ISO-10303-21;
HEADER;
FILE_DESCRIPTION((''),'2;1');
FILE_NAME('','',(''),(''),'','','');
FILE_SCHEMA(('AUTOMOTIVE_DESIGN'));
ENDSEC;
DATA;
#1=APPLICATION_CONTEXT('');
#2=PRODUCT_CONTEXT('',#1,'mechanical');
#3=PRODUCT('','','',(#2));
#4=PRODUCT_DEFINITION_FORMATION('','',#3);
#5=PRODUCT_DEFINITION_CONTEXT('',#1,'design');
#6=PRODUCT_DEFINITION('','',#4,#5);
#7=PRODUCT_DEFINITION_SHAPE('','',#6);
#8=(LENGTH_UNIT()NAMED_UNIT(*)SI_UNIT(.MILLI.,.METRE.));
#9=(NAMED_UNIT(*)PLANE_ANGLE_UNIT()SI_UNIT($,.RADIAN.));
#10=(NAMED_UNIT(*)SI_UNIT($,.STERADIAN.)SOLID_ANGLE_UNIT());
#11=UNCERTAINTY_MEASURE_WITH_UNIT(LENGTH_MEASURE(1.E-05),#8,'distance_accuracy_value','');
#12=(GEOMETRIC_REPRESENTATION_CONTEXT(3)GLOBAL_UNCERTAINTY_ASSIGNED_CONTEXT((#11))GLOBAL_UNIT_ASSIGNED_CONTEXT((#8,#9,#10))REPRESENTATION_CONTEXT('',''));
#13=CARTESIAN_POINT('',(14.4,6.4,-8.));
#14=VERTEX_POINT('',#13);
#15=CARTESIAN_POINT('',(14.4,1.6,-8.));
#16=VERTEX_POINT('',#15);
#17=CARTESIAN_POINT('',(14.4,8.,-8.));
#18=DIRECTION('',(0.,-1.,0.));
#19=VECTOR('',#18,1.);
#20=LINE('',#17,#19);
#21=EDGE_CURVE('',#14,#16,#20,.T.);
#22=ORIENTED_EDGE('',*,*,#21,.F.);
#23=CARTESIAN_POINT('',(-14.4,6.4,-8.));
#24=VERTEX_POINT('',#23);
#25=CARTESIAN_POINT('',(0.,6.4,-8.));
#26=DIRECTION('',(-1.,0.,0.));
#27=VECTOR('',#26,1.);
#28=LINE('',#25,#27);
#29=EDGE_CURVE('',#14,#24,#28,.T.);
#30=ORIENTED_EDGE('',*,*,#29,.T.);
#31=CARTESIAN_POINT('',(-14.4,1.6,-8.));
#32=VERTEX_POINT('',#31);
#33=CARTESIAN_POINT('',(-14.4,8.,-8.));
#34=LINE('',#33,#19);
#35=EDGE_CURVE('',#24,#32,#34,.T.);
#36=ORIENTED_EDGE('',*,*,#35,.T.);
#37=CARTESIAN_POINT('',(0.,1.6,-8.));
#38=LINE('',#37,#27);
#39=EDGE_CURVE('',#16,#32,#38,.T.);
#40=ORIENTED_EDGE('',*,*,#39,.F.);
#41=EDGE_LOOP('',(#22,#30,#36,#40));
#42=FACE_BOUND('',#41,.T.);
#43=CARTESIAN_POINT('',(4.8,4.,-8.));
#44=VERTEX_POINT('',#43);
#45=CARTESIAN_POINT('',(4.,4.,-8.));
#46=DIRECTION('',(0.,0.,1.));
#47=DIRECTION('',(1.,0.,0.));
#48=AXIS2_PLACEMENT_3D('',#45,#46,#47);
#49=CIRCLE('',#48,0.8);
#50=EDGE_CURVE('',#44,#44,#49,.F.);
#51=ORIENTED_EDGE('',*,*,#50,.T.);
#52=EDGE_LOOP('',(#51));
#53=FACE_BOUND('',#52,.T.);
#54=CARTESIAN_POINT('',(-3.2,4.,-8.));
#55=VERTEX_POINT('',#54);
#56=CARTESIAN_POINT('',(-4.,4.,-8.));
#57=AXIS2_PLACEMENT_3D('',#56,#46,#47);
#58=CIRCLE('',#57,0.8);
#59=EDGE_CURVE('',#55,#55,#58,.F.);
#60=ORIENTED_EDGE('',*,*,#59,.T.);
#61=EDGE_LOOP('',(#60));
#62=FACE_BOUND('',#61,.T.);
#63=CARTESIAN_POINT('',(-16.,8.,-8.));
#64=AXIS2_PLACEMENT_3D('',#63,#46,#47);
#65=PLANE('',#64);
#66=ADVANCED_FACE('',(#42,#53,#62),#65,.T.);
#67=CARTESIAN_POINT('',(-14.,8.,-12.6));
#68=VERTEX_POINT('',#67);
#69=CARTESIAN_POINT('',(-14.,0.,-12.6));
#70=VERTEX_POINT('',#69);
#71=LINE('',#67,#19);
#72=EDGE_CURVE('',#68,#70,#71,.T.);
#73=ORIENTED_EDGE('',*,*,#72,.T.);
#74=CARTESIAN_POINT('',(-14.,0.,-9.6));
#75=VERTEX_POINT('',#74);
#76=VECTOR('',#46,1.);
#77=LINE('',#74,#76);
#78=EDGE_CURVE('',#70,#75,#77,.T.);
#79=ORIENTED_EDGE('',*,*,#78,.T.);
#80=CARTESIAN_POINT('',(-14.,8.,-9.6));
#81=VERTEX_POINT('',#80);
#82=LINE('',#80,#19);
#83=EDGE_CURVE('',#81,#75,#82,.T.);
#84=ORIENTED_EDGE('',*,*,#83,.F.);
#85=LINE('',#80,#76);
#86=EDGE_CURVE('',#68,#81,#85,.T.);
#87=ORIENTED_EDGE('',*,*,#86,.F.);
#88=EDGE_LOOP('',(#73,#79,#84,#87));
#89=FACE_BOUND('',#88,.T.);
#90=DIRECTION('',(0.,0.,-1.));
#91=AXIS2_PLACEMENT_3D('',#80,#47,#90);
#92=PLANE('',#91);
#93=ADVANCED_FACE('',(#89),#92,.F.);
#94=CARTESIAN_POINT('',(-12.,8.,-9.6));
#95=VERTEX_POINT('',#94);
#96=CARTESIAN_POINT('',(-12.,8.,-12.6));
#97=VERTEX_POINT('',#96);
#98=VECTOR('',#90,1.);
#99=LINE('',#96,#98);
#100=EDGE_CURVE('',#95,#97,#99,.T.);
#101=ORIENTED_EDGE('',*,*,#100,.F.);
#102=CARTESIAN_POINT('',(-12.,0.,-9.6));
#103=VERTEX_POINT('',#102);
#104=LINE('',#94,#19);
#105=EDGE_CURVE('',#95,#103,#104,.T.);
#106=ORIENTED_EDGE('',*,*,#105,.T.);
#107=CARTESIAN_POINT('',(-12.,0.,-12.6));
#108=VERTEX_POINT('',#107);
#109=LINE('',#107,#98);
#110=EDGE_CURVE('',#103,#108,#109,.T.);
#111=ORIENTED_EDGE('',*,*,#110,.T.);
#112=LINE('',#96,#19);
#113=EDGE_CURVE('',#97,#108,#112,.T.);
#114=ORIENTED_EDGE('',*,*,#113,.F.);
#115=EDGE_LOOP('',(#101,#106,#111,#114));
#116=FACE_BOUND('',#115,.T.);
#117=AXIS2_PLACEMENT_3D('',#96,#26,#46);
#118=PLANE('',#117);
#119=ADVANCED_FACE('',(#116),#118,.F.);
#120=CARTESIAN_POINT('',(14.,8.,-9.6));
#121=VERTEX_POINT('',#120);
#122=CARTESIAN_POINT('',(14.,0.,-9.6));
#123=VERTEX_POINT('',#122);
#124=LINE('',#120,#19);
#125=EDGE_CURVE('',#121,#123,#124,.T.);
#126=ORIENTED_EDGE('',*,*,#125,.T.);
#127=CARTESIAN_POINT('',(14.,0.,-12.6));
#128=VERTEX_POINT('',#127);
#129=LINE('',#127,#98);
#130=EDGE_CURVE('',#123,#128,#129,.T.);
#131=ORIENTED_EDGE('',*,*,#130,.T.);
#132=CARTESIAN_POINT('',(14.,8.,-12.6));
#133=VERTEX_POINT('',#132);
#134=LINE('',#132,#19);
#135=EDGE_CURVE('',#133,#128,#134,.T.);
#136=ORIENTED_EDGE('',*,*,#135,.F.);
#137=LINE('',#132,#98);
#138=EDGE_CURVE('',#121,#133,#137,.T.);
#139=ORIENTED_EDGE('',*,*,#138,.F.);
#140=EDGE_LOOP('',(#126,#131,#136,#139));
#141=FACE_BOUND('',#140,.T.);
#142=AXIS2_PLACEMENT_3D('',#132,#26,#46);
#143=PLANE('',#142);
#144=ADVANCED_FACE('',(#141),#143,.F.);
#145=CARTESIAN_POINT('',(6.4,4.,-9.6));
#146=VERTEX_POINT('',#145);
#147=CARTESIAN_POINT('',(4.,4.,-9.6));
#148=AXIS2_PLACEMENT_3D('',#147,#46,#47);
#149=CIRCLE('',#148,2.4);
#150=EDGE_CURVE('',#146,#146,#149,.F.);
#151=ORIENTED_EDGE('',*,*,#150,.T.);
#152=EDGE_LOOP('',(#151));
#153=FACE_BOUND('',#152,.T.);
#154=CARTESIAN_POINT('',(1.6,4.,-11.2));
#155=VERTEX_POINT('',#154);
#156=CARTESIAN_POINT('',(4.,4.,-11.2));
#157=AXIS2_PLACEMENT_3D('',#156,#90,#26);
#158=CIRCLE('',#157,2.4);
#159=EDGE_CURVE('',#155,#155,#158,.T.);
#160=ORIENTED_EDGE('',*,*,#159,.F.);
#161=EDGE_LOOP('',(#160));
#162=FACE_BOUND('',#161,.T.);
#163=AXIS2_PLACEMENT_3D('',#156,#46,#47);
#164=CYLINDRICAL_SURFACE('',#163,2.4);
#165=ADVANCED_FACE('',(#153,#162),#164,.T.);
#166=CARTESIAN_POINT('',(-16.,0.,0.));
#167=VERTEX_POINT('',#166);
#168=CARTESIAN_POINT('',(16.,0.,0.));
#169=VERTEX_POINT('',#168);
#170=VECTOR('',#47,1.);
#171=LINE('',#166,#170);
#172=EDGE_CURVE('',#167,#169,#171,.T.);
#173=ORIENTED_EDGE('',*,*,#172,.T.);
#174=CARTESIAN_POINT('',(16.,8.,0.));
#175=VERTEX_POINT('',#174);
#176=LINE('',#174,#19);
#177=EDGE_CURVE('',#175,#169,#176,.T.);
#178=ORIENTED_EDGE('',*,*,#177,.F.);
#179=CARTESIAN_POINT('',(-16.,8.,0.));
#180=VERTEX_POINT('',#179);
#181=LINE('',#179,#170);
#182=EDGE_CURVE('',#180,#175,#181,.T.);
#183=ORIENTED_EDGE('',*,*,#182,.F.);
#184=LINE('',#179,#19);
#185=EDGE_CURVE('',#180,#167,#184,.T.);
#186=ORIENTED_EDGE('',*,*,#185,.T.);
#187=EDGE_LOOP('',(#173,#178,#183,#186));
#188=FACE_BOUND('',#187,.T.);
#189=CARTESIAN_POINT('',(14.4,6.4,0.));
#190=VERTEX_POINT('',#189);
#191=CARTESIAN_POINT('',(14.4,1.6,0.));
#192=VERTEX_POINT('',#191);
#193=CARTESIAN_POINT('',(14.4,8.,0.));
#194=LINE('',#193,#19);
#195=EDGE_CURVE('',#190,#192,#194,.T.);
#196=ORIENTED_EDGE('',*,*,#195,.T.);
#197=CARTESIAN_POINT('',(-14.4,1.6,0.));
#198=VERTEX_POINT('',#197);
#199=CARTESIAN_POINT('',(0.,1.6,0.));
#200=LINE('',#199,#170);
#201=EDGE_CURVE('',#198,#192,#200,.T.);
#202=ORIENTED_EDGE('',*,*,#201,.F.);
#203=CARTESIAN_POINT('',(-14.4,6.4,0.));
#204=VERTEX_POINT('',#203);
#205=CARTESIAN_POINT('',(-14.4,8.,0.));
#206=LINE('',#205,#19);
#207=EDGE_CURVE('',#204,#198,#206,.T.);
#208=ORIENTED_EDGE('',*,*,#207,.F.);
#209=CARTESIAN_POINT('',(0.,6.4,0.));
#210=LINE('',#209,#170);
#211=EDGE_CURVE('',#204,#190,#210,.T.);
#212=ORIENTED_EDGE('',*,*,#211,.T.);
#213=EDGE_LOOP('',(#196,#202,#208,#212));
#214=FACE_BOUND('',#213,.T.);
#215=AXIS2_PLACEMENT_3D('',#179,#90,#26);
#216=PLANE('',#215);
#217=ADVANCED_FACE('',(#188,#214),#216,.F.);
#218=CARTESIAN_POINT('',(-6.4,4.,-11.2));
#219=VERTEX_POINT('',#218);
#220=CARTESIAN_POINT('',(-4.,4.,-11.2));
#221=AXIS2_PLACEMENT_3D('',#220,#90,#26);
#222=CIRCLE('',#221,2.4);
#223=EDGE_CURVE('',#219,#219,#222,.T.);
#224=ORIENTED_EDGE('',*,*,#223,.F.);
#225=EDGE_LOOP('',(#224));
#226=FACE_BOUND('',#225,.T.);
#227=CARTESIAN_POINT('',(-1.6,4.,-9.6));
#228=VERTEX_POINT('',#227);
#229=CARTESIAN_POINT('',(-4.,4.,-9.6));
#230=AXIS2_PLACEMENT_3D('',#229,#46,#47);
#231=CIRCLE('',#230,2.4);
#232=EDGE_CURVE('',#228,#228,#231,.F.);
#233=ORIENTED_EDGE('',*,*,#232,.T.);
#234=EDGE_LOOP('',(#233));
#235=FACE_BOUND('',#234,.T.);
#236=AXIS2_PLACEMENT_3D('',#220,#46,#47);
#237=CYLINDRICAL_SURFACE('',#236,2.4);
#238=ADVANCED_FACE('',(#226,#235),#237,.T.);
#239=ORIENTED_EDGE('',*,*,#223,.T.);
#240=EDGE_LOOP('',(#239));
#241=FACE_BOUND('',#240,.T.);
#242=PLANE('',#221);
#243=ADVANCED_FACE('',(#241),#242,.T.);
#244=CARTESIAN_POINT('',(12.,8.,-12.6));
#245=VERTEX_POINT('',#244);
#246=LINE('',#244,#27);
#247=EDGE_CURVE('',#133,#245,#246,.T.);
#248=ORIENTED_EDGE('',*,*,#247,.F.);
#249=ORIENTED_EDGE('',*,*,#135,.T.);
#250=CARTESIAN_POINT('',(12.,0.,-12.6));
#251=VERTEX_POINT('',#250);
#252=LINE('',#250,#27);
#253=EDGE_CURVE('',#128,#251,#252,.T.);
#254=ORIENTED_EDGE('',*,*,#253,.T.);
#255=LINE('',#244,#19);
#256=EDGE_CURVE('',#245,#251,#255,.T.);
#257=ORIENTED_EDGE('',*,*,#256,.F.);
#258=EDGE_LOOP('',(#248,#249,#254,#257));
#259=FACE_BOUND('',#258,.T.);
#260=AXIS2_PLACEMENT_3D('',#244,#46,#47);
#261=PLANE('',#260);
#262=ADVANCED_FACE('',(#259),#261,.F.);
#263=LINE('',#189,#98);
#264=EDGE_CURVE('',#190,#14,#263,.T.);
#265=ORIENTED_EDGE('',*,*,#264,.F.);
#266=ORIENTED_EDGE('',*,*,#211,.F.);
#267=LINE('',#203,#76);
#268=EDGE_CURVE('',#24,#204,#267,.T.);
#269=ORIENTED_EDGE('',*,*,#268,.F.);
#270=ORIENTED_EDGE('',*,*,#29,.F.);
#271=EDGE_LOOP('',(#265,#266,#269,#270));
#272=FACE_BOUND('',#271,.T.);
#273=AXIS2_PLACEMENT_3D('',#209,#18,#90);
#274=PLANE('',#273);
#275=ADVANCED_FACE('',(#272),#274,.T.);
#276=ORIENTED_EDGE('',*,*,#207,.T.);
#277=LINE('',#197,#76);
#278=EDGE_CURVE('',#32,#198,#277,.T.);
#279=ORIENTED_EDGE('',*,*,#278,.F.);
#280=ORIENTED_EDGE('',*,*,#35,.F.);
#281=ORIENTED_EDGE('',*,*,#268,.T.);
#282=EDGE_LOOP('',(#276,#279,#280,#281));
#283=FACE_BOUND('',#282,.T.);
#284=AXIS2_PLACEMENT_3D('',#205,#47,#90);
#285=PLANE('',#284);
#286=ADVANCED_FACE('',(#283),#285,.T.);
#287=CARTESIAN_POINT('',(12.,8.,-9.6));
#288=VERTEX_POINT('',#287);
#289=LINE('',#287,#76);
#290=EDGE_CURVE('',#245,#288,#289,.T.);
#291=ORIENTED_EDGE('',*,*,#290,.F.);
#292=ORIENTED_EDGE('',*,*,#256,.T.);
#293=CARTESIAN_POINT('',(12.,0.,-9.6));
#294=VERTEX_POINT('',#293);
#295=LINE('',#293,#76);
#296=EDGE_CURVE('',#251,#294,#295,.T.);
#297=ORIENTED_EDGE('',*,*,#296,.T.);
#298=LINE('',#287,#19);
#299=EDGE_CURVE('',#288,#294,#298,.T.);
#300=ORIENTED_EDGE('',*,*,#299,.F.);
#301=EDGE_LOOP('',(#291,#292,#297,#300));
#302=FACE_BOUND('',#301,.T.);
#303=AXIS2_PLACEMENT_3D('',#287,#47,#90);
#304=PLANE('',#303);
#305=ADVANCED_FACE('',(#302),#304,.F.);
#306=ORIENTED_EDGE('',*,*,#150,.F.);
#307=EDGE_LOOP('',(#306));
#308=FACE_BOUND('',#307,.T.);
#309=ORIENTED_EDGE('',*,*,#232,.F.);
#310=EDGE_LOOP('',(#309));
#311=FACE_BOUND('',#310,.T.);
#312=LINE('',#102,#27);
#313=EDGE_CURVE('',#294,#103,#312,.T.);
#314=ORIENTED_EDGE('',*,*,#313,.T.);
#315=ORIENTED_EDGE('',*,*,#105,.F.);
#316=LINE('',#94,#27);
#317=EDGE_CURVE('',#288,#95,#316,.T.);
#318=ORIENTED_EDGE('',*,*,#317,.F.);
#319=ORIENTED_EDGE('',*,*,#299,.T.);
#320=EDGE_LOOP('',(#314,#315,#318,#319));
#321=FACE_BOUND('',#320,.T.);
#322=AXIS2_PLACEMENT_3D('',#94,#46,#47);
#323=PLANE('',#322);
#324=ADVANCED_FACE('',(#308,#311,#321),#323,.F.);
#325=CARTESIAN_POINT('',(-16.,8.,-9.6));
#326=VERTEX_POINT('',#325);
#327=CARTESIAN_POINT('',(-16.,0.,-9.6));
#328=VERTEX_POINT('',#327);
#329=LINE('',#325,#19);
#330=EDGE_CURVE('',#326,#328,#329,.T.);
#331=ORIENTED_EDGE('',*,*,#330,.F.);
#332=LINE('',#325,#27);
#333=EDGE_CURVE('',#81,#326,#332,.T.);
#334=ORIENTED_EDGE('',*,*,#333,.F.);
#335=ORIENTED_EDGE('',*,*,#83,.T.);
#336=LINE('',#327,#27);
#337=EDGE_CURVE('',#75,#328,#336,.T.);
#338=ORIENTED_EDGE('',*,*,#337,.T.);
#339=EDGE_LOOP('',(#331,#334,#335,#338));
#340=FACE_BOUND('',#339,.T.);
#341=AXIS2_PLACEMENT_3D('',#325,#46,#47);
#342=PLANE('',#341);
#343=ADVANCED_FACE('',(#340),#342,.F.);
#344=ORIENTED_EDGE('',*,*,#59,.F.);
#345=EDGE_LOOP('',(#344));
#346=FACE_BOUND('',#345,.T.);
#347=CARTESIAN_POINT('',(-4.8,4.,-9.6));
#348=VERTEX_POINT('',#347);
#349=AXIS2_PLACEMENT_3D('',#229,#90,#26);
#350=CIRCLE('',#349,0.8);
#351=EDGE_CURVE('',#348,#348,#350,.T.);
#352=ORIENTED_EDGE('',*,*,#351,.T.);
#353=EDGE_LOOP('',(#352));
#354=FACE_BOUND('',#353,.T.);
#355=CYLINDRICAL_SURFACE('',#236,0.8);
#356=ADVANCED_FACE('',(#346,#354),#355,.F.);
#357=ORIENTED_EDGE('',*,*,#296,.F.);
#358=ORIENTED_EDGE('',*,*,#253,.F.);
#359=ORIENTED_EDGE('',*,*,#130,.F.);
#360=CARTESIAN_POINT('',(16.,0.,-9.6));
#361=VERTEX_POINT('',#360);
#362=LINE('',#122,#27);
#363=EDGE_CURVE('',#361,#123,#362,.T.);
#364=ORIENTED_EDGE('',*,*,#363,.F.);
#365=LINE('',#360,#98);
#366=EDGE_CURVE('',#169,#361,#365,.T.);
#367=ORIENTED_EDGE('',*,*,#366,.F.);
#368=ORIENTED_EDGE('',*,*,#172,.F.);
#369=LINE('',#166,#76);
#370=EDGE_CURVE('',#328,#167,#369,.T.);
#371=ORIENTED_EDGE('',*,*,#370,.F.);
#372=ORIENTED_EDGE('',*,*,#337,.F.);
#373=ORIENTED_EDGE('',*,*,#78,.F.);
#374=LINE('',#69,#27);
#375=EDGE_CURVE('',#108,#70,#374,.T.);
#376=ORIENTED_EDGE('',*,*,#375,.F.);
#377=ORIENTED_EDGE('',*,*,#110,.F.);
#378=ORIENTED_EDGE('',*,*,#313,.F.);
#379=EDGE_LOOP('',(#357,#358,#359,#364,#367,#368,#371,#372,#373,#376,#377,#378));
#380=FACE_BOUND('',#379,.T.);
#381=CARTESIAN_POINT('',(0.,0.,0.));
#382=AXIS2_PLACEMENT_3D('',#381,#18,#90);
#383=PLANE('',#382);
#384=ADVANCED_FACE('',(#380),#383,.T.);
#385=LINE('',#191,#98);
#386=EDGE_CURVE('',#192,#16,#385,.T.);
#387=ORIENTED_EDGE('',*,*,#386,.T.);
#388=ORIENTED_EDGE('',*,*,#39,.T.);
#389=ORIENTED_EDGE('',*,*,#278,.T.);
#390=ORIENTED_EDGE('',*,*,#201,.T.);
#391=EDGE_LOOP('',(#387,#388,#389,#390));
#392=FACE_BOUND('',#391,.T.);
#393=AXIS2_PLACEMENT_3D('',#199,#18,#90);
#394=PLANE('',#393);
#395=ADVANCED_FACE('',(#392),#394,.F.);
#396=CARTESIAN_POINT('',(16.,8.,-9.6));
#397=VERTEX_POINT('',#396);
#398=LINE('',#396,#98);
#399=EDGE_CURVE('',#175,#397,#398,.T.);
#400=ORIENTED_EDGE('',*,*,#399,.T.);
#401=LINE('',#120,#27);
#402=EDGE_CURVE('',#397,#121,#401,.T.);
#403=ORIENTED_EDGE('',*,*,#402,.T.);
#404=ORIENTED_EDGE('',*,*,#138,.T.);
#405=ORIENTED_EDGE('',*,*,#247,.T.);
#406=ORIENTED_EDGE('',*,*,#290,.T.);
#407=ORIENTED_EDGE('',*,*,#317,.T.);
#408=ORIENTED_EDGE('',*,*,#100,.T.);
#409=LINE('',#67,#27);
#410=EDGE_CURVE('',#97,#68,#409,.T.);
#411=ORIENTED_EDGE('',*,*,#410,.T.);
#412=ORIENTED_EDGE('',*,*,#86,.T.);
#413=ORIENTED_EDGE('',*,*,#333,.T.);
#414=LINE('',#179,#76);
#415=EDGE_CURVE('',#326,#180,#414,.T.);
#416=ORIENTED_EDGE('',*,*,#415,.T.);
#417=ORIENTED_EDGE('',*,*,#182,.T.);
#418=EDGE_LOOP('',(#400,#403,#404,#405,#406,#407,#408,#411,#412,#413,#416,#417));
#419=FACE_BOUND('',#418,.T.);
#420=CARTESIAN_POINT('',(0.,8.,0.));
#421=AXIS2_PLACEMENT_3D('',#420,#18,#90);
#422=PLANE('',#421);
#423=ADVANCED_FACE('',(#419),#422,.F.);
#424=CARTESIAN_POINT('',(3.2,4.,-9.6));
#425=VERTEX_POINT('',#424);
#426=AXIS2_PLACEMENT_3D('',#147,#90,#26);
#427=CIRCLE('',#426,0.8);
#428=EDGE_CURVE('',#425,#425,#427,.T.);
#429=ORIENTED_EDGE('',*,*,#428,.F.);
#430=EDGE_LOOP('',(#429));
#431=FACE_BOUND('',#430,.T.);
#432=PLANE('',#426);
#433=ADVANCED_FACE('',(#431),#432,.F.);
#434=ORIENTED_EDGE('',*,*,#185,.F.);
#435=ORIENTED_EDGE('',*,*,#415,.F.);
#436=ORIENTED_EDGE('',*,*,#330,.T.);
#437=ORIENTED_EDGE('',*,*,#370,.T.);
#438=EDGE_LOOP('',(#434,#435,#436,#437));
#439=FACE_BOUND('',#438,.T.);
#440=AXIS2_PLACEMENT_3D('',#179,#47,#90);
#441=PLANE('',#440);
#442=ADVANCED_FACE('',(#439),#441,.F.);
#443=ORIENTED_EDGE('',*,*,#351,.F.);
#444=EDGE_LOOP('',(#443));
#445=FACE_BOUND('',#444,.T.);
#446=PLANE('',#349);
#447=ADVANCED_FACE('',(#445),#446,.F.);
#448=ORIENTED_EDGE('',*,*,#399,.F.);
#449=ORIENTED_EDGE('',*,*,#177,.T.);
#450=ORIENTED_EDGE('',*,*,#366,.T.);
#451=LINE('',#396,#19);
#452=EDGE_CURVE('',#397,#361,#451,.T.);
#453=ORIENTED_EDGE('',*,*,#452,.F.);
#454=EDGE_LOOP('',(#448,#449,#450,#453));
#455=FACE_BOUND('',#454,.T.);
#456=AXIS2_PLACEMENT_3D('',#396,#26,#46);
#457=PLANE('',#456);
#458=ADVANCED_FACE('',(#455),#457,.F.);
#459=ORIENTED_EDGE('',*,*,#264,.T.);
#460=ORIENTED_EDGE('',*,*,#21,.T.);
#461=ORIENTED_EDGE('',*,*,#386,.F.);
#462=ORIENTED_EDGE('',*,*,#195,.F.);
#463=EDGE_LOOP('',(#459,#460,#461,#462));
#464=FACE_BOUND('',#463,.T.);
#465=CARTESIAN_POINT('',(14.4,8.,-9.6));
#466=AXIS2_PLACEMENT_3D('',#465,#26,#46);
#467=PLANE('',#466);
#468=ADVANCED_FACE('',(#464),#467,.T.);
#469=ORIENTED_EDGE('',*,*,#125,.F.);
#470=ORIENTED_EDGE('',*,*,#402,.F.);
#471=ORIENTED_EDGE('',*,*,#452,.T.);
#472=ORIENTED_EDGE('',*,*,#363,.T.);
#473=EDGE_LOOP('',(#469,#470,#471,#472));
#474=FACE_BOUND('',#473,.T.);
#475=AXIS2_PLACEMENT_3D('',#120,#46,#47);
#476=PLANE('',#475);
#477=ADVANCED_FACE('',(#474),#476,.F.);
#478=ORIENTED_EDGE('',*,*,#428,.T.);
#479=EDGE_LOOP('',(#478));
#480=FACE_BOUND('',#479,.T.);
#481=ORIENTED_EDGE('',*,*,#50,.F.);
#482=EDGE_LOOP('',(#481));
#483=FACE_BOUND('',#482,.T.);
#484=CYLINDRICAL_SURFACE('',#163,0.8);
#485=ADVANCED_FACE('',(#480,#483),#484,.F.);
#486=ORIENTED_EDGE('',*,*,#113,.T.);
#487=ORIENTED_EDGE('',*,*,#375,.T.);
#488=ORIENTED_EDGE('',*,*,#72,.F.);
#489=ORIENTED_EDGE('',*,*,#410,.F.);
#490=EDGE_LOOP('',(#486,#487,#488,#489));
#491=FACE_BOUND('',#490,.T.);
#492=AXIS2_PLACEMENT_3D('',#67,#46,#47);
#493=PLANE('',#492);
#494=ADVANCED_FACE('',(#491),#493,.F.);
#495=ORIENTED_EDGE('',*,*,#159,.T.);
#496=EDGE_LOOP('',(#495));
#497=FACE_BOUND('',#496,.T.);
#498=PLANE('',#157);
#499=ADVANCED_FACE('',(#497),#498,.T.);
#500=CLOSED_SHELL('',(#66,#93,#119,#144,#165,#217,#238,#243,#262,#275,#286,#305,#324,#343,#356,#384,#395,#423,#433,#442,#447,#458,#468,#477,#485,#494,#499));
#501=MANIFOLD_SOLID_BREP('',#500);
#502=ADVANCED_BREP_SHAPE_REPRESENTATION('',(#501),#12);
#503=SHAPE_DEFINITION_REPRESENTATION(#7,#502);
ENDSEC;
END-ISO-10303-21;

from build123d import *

# Parameters (mm, degrees)
BOSS_EXTRUDE1_DEPTH = 8
SKETCH2_R           = 2.4
BOSS_EXTRUDE2_DEPTH = 1.6
SHELL1_START        = -8
SHELL1_OUTLINE_W    = 28.8
SHELL1_OUTLINE_H    = 4.8
SHELL1_DEPTH        = 8
SHELL1_START_2      = -9.6
SHELL1_2_OUTLINE_R  = 0.8
SHELL1_2_DEPTH      = 1.6


# Read off the part's stored shape, not the designer's step: Shell1
with BuildPart() as part:
    # Sketch1 → Boss-Extrude1 (new body)
    with BuildSketch(Plane(origin=(0, 0, 0), x_dir=(1, 0, 0), z_dir=(0, 1, 0))):
        Polygon((-16, 0), (16, 0), (16, 9.6), (14, 9.6), (14, 12.6), (12, 12.6), (12, 9.6), (-12, 9.6), (-12, 12.6), (-14, 12.6), (-14, 9.6), (-16, 9.6), align=None)
    extrude(amount=BOSS_EXTRUDE1_DEPTH)

    # Sketch2 → Boss-Extrude2 (add)
    with BuildSketch(Plane(origin=(0, 0, -9.6), x_dir=(-1, 0, 0), z_dir=(0, 0, -1))):
        with Locations(Location((4, 4, 0), (0, 0, 180))):
            Circle(SKETCH2_R)
        with Locations(Location((-4, 4, 0), (0, 0, 180))):
            Circle(SKETCH2_R)
    extrude(amount=BOSS_EXTRUDE2_DEPTH)

    # Shell1 outline → Shell1 (cut)
    with BuildSketch(Plane.XY.offset(SHELL1_START)):
        with Locations((0, 4)):
            Rectangle(SHELL1_OUTLINE_W, SHELL1_OUTLINE_H)
    extrude(amount=SHELL1_DEPTH, mode=Mode.SUBTRACT)

    # Shell1 2 outline → Shell1 2 (cut)
    with BuildSketch(Plane.XY.offset(SHELL1_START_2)):
        with Locations((-4, 4)):
            Circle(SHELL1_2_OUTLINE_R)
        with Locations((4, 4)):
            Circle(SHELL1_2_OUTLINE_R)
    extrude(amount=SHELL1_2_DEPTH, mode=Mode.SUBTRACT)


solid = part.part
